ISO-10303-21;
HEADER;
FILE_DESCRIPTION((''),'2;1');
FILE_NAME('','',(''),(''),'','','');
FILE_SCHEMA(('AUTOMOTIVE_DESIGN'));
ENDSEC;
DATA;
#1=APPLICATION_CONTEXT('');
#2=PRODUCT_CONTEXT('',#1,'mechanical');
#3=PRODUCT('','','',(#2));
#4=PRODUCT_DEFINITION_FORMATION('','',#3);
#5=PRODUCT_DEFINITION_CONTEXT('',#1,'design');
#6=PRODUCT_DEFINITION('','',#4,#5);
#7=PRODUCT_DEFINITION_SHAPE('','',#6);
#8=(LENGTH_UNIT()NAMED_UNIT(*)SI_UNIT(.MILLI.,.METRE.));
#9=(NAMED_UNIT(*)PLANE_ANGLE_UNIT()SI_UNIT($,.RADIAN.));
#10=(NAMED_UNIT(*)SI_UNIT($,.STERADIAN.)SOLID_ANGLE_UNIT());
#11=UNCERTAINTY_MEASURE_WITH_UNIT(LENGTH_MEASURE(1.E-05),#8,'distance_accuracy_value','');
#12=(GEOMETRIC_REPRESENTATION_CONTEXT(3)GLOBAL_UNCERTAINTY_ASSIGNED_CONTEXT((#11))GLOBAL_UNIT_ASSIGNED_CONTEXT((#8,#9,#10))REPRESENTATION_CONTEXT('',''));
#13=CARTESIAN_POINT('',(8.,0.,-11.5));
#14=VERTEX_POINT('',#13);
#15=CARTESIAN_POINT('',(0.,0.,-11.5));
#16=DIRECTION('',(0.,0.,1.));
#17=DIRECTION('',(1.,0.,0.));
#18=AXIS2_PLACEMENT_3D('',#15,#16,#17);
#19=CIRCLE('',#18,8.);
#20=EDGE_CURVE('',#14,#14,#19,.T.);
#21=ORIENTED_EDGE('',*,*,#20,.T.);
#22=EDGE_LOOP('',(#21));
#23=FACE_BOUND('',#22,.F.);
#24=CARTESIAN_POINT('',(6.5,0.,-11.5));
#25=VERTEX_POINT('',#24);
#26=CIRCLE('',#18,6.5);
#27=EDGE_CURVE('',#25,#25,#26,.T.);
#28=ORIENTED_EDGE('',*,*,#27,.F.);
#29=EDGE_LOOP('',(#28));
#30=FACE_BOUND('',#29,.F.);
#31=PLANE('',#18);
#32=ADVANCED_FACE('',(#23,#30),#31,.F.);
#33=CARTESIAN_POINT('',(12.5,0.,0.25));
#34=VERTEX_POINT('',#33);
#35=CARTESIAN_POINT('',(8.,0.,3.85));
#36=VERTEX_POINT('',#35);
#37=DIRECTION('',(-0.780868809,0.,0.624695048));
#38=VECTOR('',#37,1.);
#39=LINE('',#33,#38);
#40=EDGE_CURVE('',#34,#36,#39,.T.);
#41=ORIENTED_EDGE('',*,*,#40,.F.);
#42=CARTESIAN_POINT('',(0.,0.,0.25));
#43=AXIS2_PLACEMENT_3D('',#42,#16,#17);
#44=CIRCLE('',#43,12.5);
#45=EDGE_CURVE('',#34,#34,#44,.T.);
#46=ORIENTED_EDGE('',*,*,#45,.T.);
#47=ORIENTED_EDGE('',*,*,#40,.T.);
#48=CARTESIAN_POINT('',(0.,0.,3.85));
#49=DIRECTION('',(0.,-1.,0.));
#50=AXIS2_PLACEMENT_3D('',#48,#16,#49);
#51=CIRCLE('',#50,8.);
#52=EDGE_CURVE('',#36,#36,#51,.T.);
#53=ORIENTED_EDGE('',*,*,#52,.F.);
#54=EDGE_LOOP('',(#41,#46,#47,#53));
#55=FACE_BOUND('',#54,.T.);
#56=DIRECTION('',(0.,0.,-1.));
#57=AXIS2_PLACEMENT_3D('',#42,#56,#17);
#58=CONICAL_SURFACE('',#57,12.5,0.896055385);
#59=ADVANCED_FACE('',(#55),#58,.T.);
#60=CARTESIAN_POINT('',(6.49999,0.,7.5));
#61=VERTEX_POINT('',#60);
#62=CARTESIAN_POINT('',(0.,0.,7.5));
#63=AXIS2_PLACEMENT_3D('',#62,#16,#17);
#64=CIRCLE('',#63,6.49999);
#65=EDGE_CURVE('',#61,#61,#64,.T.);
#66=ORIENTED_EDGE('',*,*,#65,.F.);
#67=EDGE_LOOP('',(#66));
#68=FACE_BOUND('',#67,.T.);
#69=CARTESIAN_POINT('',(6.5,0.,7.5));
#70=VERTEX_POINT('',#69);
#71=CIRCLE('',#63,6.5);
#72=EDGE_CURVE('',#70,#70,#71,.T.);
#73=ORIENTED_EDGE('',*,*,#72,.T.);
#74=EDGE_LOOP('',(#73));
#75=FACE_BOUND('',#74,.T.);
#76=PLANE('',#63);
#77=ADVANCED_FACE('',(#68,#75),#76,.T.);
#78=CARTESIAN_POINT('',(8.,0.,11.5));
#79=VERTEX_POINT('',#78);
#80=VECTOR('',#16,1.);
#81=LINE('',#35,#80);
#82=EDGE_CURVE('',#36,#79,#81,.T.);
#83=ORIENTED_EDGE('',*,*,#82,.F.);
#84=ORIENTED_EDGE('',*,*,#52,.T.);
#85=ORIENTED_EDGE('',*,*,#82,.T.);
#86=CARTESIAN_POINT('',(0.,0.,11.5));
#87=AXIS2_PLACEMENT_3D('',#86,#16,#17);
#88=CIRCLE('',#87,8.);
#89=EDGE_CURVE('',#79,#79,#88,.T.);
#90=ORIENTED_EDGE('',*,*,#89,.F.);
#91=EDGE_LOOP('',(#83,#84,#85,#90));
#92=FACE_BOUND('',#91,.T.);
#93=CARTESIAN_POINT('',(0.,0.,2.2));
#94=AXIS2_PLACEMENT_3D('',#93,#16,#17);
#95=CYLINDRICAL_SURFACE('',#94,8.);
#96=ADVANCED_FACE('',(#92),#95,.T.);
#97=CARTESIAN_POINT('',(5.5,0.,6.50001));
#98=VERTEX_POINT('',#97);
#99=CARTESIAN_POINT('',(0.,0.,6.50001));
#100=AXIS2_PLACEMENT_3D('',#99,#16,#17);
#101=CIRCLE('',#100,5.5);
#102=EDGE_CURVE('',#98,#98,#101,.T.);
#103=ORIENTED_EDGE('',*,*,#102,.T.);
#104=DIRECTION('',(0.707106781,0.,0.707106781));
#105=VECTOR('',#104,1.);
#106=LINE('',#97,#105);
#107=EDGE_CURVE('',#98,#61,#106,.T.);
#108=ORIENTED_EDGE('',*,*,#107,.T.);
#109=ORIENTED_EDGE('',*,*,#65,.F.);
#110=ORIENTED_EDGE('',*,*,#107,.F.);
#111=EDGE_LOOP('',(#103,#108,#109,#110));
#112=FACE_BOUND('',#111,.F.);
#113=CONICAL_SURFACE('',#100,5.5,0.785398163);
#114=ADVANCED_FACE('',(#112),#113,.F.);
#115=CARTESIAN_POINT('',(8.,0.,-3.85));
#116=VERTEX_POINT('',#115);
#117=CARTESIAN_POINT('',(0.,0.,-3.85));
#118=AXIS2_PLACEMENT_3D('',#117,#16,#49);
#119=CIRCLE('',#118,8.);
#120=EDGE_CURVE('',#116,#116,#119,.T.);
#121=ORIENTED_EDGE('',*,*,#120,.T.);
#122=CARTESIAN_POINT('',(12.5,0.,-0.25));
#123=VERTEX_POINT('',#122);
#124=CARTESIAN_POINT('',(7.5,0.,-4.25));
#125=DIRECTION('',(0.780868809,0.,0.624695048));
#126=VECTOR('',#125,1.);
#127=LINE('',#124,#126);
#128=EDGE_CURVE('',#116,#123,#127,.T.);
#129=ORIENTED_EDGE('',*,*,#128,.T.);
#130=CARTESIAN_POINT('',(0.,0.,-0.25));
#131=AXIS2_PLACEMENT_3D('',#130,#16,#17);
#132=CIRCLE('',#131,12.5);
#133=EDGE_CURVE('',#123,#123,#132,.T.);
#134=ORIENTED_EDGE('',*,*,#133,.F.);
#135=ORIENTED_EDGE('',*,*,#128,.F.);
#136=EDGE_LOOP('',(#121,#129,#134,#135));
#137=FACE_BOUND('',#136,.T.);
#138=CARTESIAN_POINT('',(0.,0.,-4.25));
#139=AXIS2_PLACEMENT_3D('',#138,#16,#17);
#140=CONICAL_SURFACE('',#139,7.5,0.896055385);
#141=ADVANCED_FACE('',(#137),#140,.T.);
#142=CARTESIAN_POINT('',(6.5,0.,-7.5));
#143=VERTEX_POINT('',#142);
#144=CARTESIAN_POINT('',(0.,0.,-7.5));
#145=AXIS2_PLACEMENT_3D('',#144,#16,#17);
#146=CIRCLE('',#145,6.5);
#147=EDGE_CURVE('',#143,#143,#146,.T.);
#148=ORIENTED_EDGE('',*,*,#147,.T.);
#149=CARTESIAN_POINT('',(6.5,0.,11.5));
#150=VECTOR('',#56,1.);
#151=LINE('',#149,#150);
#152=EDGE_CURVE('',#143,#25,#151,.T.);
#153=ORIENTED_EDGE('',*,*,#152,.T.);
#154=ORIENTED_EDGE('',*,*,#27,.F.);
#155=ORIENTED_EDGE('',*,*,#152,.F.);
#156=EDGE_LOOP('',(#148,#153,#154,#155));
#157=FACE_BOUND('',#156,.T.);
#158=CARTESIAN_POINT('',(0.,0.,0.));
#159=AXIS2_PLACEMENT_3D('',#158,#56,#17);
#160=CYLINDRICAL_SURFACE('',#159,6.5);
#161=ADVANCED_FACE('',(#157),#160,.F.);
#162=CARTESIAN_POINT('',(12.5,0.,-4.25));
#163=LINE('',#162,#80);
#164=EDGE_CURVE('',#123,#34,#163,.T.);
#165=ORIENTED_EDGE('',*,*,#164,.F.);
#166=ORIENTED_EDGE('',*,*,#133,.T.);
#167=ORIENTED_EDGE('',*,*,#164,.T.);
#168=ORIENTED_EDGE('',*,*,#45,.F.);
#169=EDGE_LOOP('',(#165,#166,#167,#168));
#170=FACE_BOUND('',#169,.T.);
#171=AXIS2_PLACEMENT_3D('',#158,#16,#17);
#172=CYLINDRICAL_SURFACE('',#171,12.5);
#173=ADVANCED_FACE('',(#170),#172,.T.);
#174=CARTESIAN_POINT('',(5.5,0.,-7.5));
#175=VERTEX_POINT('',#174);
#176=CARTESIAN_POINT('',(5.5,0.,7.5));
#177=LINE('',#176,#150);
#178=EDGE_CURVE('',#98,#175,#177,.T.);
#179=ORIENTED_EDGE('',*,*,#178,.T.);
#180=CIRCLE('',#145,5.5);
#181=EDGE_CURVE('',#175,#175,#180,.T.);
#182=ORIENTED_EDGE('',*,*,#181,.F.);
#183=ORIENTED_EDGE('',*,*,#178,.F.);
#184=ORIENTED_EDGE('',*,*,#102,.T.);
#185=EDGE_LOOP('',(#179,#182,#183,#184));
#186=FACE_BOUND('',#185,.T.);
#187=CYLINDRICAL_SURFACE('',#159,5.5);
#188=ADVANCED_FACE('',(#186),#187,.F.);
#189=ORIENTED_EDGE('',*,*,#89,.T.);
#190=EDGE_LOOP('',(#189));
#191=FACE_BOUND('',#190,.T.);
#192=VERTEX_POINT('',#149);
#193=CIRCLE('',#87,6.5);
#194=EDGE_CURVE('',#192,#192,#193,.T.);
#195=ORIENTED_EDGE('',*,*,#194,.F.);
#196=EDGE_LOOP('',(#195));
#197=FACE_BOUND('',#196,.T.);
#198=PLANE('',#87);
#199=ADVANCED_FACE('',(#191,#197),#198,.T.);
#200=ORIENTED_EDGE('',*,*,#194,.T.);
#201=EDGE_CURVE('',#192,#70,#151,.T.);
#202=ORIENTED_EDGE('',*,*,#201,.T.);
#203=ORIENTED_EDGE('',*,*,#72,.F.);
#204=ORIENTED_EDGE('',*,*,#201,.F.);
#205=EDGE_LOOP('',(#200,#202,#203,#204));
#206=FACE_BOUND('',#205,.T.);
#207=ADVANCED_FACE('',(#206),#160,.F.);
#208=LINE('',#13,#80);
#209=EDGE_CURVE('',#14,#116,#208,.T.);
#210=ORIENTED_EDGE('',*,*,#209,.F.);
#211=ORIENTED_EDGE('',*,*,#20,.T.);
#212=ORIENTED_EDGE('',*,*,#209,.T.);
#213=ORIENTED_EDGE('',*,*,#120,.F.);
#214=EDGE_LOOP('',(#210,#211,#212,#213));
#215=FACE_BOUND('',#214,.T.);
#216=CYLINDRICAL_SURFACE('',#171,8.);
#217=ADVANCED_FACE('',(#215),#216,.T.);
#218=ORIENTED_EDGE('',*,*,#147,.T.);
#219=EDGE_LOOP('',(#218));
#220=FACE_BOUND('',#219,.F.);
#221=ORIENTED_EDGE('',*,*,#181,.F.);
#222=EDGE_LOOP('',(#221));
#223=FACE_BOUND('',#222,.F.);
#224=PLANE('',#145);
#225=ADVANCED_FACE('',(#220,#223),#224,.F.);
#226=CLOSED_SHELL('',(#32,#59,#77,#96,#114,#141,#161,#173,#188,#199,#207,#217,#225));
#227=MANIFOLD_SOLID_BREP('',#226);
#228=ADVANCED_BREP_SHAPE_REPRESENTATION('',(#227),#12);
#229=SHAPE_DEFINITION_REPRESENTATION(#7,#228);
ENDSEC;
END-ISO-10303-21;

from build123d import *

# Parameters (mm, degrees)
F0_R         = 8
F0_R_2       = 6.5
F1_DEPTH     = 11.5
F0_R_3       = 12.5
F2_DEPTH     = 4.25
F3_S5_R      = 8
F3_T6_DEPTH  = 19
F3_S11_R     = 8
F3_T12_DEPTH = 19
F0_R_4       = 5.5
F5_DEPTH     = 7.5
F6_SIZE      = 0.99999


# Not quite as in the source:
# - a fillet or chamfer that OpenCascade refuses, or shapes differently, is made with other operations: its cross-section is extruded or revolved along the edge and cut away or added
# - two fillets or chamfers of one size are made in one step
# - a fillet or chamfer is up to 0.001 mm smaller than in the source, because OpenCascade refuses the exact size


with BuildPart() as f1:
    # F0 (on Top) → F1 (new body, symmetric)
    with BuildSketch(Plane.XY):
        Circle(F0_R)
        Circle(F0_R_2, mode=Mode.SUBTRACT)
    extrude(amount=F1_DEPTH, both=True)

    # F0 (on Top) → F2 (join, symmetric)
    with BuildSketch(Plane.XY):
        Circle(F0_R_3)
        Circle(F0_R, mode=Mode.SUBTRACT)
    extrude(amount=F2_DEPTH, both=True)

    # F3: chamfer of 5 x 4 on 2 edges, made by hand


with BuildPart() as f3_tool2:
    # F3_s3 → F3_t4 (revolve)
    with BuildSketch(Plane.XZ):
        Polygon((12.5, 0.25), (7.5, 4.25), (12.5, 4.25), align=None)
    revolve(axis=Axis((0, 0, 4.25), (0, 0, 1)))

    # F3_s5 → F3_t6 (cut, symmetric)
    with BuildSketch(Plane.XY.offset(2.2)):
        Circle(F3_S5_R)
    extrude(amount=F3_T6_DEPTH, both=True, mode=Mode.SUBTRACT)


with BuildPart() as f1_1:
    add(f1.part)

    # F3_t1: cut F3_tool2
    add(f3_tool2.part, mode=Mode.SUBTRACT)


with BuildPart() as f3_tool8:
    # F3_s9 → F3_t10 (revolve)
    with BuildSketch(Plane.XZ):
        Polygon((7.5, -4.25), (12.5, -0.25), (12.5, -4.25), align=None)
    revolve(axis=Axis((0, 0, -4.25), (0, 0, 1)))

    # F3_s11 → F3_t12 (cut, symmetric)
    with BuildSketch(Plane.XY.offset(-2.2)):
        Circle(F3_S11_R)
    extrude(amount=F3_T12_DEPTH, both=True, mode=Mode.SUBTRACT)


with BuildPart() as f1_2:
    add(f1_1.part)

    # F3_t7: cut F3_tool8
    add(f3_tool8.part, mode=Mode.SUBTRACT)

    # F0 (on Top) → F5 (join, symmetric)
    with BuildSketch(Plane.XY):
        Circle(F0_R_2)
        Circle(F0_R_4, mode=Mode.SUBTRACT)
    extrude(amount=F5_DEPTH, both=True)

    # F6 (size 1 in the source; OpenCascade refuses exactly that, so slightly less here)
    f6_edges = [f1_2.edges().sort_by_distance(p)[0] for p in [
        (-5.5, 0, 7.5),
    ]]
    chamfer(f6_edges, length=F6_SIZE)


solid = f1_2.part
